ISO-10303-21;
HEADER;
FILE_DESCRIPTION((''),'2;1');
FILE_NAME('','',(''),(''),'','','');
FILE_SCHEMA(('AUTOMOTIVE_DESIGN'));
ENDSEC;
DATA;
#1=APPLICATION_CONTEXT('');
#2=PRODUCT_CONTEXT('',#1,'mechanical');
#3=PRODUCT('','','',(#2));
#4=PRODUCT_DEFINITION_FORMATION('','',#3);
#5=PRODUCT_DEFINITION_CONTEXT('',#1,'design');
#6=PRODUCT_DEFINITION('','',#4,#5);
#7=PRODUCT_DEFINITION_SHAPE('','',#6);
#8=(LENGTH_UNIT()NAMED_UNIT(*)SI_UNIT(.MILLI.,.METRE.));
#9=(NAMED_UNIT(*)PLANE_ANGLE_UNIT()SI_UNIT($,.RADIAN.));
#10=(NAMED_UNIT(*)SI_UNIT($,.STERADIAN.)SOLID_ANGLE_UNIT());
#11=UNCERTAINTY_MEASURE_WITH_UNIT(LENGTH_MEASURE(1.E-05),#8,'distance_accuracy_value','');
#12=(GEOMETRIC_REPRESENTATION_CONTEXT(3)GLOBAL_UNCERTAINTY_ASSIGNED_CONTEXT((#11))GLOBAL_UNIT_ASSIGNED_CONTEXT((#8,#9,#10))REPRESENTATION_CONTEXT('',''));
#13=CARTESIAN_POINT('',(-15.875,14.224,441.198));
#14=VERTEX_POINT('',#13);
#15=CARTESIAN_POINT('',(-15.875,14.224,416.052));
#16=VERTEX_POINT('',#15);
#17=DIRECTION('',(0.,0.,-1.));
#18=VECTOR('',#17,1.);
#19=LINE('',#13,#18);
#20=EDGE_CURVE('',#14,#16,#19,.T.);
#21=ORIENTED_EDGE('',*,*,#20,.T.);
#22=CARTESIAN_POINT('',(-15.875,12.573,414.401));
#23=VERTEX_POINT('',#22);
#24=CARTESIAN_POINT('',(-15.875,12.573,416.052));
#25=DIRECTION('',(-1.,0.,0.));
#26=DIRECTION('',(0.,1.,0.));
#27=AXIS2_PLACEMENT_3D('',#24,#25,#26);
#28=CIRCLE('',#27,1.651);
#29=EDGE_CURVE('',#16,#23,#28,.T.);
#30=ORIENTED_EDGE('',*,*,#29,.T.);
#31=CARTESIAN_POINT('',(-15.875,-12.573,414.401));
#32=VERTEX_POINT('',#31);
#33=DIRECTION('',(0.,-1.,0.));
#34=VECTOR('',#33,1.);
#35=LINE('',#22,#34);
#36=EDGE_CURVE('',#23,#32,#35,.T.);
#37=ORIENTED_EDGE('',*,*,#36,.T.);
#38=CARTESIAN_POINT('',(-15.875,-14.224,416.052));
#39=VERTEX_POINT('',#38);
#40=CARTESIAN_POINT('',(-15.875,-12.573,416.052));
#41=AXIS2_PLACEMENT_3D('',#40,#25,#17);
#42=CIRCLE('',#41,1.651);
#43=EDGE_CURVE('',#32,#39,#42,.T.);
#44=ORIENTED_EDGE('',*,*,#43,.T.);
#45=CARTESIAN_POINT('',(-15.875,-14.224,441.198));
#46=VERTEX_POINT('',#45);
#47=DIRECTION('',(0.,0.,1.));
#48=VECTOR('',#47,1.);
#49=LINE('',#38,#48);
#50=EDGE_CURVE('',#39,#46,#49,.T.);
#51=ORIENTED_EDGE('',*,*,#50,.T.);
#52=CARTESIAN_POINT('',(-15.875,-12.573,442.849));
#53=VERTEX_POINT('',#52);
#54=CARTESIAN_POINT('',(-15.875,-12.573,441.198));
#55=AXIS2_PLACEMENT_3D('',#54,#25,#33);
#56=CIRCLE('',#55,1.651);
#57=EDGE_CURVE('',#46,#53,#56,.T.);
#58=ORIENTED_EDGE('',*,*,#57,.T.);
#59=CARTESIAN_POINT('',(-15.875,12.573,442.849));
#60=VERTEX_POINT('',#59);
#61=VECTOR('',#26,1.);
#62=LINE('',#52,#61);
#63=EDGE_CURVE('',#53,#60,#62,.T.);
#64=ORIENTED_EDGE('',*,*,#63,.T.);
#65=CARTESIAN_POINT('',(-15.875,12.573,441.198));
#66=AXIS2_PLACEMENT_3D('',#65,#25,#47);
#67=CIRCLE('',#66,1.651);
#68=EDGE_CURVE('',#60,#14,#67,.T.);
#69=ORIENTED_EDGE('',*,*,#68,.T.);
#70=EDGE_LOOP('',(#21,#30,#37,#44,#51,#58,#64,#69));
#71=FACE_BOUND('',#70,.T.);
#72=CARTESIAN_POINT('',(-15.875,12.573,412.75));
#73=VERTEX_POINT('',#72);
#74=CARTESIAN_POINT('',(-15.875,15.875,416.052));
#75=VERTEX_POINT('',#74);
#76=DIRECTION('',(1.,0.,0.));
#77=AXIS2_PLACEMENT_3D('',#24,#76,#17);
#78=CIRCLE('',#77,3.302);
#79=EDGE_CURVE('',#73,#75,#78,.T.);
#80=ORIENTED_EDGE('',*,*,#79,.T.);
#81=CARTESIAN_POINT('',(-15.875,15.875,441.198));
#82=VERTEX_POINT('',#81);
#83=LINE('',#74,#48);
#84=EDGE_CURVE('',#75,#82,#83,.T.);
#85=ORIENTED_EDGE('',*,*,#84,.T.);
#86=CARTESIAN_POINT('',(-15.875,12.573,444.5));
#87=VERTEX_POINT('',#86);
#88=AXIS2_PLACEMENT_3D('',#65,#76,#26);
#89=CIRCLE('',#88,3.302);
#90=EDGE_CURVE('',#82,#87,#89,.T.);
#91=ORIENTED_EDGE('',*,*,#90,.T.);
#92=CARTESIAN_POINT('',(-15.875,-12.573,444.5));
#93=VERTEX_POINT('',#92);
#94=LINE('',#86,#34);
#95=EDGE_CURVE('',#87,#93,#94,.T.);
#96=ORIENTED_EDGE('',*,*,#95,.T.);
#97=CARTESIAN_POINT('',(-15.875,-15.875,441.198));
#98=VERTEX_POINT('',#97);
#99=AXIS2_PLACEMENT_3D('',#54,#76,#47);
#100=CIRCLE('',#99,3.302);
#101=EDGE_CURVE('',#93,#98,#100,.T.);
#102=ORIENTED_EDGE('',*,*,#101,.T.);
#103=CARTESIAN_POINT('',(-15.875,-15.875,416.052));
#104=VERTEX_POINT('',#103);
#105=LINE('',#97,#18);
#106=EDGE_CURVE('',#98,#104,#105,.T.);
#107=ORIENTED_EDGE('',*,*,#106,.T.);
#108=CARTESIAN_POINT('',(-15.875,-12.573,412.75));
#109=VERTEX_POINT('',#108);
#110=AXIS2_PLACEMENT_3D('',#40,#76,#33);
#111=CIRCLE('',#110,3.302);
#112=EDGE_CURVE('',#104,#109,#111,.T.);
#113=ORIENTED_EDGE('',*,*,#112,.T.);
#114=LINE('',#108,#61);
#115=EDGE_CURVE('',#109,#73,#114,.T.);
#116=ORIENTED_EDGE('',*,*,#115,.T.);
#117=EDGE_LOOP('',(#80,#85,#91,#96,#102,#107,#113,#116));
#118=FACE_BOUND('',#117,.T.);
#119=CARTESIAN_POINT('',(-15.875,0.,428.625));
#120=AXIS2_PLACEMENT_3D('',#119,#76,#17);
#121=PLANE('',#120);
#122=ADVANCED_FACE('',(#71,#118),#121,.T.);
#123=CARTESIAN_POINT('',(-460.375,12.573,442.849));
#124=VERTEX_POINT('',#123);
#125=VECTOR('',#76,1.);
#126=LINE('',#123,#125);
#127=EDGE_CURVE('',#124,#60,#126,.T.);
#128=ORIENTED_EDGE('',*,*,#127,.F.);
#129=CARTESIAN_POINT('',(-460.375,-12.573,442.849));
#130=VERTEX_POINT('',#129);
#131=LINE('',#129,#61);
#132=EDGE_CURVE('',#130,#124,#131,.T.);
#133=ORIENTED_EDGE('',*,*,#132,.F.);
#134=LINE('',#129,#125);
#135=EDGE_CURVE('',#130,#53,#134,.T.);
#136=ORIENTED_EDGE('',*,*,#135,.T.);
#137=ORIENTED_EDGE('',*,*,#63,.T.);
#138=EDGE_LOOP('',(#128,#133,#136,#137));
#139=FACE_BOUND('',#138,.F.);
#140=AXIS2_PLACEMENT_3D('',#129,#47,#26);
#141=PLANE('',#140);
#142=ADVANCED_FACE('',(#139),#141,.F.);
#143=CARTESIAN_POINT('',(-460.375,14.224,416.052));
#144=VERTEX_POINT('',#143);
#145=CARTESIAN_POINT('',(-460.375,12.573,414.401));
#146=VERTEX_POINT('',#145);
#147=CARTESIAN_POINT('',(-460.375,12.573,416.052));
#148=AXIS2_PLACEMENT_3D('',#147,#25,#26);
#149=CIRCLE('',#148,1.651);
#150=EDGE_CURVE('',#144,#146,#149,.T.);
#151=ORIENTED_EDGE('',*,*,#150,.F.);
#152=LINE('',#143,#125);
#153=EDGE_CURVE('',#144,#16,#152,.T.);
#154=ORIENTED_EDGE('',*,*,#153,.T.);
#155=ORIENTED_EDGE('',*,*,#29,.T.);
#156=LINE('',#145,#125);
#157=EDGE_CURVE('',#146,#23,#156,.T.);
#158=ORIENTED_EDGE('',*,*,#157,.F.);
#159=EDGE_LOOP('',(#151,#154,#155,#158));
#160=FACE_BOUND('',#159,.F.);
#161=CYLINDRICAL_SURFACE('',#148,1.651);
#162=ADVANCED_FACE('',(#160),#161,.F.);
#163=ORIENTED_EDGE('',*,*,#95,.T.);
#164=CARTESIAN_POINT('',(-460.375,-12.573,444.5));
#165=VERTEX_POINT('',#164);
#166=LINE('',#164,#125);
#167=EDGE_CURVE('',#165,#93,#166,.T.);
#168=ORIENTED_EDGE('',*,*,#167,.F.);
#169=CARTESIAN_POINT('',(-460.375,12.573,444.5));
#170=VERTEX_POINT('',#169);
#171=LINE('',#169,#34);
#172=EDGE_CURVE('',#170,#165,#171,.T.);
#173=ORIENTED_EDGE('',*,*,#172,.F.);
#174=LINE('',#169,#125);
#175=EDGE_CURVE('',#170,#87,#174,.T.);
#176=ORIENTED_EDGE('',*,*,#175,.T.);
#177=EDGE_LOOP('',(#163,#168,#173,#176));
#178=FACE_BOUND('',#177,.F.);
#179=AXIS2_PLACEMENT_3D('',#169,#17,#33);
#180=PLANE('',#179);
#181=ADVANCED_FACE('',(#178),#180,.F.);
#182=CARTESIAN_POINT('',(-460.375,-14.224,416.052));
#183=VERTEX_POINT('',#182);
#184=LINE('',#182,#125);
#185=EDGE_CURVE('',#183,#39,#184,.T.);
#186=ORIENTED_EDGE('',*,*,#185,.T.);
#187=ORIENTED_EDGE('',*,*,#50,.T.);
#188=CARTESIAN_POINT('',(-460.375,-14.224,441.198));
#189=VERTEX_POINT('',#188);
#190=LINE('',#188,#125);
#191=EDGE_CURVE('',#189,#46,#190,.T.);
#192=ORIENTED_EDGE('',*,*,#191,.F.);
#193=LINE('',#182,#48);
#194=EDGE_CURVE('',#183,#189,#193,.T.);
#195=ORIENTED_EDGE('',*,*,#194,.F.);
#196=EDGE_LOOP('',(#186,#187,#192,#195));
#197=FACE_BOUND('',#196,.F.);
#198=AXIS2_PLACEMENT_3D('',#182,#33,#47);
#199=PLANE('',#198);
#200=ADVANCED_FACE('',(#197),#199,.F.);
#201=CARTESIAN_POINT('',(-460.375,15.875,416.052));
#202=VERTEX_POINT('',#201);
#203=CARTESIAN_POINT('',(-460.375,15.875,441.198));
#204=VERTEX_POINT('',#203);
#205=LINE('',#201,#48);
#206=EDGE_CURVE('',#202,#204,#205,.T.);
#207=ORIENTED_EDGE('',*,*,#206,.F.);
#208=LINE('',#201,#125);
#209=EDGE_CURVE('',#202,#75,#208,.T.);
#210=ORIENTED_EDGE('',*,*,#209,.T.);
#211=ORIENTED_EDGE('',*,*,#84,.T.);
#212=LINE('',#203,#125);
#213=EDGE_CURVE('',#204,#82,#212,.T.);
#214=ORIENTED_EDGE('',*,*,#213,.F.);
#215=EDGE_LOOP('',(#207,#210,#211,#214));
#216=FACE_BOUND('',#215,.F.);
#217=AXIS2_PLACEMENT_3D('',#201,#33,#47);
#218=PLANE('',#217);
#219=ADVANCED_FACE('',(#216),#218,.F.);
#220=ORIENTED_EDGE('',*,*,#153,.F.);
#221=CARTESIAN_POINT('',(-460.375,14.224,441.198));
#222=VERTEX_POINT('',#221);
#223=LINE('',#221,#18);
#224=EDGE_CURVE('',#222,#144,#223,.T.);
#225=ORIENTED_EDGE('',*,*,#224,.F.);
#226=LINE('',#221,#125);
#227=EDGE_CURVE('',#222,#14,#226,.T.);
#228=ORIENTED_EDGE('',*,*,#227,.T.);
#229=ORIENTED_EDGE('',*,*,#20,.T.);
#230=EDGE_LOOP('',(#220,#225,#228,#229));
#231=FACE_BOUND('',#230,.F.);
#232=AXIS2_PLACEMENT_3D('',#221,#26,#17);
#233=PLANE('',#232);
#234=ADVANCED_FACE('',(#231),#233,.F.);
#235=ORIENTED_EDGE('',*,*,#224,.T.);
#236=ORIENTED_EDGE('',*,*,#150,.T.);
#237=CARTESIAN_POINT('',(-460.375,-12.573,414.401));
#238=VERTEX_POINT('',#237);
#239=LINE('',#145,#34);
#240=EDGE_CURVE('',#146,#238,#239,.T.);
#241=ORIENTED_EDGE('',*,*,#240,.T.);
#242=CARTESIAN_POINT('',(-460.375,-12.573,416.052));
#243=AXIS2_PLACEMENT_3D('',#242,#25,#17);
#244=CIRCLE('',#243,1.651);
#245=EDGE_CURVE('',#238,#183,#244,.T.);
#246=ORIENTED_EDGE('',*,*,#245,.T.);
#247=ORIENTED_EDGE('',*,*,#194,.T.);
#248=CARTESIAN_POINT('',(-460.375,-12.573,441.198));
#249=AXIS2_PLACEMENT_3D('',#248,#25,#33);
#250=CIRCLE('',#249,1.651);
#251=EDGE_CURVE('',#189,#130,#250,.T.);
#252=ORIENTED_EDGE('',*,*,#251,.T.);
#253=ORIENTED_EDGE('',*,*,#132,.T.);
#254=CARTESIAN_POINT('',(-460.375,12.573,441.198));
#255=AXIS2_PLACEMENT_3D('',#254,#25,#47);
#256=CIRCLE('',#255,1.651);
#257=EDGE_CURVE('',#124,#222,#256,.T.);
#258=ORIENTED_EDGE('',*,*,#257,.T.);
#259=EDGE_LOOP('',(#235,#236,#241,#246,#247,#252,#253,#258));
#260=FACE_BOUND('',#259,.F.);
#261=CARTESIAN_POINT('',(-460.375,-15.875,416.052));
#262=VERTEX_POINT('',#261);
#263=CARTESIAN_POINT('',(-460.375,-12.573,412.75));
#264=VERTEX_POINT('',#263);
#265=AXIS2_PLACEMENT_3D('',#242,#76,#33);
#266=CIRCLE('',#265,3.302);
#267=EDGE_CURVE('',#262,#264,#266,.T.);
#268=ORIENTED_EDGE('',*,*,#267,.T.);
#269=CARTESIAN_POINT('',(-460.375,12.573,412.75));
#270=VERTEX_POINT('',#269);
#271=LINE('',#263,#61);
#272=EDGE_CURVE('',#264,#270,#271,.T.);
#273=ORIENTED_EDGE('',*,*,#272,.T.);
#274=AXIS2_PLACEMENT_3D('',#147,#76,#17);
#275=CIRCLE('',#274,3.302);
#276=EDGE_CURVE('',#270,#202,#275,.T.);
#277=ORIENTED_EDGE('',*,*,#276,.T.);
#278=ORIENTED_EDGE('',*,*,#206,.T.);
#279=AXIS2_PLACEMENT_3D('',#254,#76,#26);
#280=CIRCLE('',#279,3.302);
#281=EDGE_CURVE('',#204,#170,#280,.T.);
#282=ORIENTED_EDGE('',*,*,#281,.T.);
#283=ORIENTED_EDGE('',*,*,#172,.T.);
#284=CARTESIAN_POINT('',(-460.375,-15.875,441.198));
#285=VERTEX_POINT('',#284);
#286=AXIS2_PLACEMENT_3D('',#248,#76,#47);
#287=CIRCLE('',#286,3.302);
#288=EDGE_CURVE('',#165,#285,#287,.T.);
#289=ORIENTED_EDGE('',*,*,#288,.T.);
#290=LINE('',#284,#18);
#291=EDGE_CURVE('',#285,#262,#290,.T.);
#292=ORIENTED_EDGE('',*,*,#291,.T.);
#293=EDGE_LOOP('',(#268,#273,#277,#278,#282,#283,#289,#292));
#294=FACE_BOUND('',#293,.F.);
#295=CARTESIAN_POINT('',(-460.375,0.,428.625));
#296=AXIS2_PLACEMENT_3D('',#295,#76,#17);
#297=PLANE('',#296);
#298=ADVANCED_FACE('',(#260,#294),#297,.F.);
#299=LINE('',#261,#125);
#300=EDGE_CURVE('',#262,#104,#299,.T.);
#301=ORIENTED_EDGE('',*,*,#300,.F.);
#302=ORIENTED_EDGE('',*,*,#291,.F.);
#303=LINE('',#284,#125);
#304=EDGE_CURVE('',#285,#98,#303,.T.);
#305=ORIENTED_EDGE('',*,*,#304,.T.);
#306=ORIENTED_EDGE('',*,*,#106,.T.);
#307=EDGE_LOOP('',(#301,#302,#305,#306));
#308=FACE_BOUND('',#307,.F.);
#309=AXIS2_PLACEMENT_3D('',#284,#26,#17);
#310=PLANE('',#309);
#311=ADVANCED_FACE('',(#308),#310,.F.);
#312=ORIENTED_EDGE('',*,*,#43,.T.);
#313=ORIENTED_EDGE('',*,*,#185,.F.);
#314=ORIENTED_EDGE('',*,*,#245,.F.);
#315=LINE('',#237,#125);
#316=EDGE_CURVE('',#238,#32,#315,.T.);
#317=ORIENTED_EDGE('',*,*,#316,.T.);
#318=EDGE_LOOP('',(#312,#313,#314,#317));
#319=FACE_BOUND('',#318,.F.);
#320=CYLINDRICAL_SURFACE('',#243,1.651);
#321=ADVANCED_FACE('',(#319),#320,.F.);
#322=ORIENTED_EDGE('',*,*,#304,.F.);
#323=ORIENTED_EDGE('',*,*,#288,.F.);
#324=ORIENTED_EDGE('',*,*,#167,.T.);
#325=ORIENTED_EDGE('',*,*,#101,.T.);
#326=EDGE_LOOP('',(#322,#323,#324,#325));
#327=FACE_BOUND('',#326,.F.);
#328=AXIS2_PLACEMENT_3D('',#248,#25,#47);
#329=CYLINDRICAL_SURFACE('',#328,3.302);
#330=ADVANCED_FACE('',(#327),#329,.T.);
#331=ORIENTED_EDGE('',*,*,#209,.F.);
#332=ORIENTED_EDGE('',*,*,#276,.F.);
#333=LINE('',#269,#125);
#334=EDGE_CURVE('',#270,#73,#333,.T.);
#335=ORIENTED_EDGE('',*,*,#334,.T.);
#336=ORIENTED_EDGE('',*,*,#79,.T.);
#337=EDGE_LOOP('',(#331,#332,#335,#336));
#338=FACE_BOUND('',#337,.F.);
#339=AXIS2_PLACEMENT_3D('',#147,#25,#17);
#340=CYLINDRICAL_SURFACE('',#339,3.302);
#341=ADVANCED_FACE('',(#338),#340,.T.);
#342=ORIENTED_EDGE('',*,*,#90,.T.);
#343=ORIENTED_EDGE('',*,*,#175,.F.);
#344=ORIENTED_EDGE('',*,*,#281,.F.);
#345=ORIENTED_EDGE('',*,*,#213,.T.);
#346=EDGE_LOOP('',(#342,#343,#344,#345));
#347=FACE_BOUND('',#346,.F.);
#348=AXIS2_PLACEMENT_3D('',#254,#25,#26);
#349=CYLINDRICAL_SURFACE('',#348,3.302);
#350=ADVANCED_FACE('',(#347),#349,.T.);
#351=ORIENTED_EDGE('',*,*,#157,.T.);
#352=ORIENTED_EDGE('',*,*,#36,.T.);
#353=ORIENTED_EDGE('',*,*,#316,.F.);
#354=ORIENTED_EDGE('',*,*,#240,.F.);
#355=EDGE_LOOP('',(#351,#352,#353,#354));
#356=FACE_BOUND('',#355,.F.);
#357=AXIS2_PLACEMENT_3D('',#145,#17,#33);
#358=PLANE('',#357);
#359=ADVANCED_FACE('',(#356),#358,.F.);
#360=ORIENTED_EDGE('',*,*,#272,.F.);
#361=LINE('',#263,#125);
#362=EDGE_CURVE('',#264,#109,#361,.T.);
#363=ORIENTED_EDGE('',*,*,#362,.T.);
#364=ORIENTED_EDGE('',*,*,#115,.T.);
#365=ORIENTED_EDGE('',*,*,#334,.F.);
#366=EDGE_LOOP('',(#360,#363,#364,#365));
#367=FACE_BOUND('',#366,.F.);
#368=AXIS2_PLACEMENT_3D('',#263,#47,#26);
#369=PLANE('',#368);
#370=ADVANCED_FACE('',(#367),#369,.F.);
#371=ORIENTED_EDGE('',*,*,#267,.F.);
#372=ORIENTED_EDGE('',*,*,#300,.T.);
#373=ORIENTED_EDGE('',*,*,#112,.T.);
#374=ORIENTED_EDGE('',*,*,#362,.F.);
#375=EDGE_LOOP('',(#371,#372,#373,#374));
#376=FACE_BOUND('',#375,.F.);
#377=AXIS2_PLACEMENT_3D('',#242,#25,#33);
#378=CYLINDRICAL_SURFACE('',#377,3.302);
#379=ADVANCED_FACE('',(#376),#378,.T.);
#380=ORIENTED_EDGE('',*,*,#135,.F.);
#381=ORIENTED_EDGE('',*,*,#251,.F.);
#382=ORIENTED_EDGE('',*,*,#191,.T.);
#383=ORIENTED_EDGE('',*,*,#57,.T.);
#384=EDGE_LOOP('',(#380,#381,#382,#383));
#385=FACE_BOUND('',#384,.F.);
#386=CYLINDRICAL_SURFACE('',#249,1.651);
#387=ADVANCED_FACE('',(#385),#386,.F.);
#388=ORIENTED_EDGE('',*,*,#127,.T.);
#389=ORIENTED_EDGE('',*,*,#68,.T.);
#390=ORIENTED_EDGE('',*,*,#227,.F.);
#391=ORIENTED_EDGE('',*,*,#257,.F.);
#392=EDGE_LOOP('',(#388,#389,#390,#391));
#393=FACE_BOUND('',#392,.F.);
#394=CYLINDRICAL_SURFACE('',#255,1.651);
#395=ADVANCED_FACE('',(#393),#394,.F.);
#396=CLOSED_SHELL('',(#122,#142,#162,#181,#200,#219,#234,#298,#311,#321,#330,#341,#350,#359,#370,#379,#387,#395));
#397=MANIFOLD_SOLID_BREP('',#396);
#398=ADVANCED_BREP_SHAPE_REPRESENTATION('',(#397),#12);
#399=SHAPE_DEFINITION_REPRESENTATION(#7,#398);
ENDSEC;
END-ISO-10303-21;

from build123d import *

# Parameters (mm, degrees)
F2_DEPTH = 444.5
F3_ANGLE = 90


# Not quite as in the source:
# - a variable given as a bare number and used for a length is read in inches; the dataset says mm whatever the document's units were


with BuildPart() as f2:
    # F0 (on Top) → F2 (new body)
    with BuildSketch(Plane.XY):
        with BuildLine():
            Line((-12.573, -15.875), (12.573, -15.875))
            ThreePointArc((12.573, -15.875), (14.9078665915, -14.9078665915), (15.875, -12.573))
            Line((15.875, -12.573), (15.875, 12.573))
            ThreePointArc((15.875, 12.573), (14.9078665915, 14.9078665915), (12.573, 15.875))
            Line((12.573, 15.875), (-12.573, 15.875))
            ThreePointArc((-12.573, 15.875), (-14.9078665915, 14.9078665915), (-15.875, 12.573))
            Line((-15.875, 12.573), (-15.875, -12.573))
            ThreePointArc((-15.875, -12.573), (-14.9078665915, -14.9078665915), (-12.573, -15.875))
        make_face()
        with BuildLine():
            Line((-12.573, 14.224), (12.573, 14.224))
            ThreePointArc((12.573, 14.224), (13.7404332957, 13.7404332957), (14.224, 12.573))
            Line((14.224, 12.573), (14.224, -12.573))
            ThreePointArc((14.224, -12.573), (13.7404332957, -13.7404332957), (12.573, -14.224))
            Line((12.573, -14.224), (-12.573, -14.224))
            ThreePointArc((-12.573, -14.224), (-13.7404332957, -13.7404332957), (-14.224, -12.573))
            Line((-14.224, -12.573), (-14.224, 12.573))
            ThreePointArc((-14.224, 12.573), (-13.7404332957, 13.7404332957), (-12.573, 14.224))
        make_face(mode=Mode.SUBTRACT)
    extrude(amount=F2_DEPTH)


with BuildPart() as f2_1:
    # F3: moved
    add(f2.part.rotate(Axis((-15.875, 0, 444.5), (0, 1, 0)), F3_ANGLE))


solid = f2_1.part
